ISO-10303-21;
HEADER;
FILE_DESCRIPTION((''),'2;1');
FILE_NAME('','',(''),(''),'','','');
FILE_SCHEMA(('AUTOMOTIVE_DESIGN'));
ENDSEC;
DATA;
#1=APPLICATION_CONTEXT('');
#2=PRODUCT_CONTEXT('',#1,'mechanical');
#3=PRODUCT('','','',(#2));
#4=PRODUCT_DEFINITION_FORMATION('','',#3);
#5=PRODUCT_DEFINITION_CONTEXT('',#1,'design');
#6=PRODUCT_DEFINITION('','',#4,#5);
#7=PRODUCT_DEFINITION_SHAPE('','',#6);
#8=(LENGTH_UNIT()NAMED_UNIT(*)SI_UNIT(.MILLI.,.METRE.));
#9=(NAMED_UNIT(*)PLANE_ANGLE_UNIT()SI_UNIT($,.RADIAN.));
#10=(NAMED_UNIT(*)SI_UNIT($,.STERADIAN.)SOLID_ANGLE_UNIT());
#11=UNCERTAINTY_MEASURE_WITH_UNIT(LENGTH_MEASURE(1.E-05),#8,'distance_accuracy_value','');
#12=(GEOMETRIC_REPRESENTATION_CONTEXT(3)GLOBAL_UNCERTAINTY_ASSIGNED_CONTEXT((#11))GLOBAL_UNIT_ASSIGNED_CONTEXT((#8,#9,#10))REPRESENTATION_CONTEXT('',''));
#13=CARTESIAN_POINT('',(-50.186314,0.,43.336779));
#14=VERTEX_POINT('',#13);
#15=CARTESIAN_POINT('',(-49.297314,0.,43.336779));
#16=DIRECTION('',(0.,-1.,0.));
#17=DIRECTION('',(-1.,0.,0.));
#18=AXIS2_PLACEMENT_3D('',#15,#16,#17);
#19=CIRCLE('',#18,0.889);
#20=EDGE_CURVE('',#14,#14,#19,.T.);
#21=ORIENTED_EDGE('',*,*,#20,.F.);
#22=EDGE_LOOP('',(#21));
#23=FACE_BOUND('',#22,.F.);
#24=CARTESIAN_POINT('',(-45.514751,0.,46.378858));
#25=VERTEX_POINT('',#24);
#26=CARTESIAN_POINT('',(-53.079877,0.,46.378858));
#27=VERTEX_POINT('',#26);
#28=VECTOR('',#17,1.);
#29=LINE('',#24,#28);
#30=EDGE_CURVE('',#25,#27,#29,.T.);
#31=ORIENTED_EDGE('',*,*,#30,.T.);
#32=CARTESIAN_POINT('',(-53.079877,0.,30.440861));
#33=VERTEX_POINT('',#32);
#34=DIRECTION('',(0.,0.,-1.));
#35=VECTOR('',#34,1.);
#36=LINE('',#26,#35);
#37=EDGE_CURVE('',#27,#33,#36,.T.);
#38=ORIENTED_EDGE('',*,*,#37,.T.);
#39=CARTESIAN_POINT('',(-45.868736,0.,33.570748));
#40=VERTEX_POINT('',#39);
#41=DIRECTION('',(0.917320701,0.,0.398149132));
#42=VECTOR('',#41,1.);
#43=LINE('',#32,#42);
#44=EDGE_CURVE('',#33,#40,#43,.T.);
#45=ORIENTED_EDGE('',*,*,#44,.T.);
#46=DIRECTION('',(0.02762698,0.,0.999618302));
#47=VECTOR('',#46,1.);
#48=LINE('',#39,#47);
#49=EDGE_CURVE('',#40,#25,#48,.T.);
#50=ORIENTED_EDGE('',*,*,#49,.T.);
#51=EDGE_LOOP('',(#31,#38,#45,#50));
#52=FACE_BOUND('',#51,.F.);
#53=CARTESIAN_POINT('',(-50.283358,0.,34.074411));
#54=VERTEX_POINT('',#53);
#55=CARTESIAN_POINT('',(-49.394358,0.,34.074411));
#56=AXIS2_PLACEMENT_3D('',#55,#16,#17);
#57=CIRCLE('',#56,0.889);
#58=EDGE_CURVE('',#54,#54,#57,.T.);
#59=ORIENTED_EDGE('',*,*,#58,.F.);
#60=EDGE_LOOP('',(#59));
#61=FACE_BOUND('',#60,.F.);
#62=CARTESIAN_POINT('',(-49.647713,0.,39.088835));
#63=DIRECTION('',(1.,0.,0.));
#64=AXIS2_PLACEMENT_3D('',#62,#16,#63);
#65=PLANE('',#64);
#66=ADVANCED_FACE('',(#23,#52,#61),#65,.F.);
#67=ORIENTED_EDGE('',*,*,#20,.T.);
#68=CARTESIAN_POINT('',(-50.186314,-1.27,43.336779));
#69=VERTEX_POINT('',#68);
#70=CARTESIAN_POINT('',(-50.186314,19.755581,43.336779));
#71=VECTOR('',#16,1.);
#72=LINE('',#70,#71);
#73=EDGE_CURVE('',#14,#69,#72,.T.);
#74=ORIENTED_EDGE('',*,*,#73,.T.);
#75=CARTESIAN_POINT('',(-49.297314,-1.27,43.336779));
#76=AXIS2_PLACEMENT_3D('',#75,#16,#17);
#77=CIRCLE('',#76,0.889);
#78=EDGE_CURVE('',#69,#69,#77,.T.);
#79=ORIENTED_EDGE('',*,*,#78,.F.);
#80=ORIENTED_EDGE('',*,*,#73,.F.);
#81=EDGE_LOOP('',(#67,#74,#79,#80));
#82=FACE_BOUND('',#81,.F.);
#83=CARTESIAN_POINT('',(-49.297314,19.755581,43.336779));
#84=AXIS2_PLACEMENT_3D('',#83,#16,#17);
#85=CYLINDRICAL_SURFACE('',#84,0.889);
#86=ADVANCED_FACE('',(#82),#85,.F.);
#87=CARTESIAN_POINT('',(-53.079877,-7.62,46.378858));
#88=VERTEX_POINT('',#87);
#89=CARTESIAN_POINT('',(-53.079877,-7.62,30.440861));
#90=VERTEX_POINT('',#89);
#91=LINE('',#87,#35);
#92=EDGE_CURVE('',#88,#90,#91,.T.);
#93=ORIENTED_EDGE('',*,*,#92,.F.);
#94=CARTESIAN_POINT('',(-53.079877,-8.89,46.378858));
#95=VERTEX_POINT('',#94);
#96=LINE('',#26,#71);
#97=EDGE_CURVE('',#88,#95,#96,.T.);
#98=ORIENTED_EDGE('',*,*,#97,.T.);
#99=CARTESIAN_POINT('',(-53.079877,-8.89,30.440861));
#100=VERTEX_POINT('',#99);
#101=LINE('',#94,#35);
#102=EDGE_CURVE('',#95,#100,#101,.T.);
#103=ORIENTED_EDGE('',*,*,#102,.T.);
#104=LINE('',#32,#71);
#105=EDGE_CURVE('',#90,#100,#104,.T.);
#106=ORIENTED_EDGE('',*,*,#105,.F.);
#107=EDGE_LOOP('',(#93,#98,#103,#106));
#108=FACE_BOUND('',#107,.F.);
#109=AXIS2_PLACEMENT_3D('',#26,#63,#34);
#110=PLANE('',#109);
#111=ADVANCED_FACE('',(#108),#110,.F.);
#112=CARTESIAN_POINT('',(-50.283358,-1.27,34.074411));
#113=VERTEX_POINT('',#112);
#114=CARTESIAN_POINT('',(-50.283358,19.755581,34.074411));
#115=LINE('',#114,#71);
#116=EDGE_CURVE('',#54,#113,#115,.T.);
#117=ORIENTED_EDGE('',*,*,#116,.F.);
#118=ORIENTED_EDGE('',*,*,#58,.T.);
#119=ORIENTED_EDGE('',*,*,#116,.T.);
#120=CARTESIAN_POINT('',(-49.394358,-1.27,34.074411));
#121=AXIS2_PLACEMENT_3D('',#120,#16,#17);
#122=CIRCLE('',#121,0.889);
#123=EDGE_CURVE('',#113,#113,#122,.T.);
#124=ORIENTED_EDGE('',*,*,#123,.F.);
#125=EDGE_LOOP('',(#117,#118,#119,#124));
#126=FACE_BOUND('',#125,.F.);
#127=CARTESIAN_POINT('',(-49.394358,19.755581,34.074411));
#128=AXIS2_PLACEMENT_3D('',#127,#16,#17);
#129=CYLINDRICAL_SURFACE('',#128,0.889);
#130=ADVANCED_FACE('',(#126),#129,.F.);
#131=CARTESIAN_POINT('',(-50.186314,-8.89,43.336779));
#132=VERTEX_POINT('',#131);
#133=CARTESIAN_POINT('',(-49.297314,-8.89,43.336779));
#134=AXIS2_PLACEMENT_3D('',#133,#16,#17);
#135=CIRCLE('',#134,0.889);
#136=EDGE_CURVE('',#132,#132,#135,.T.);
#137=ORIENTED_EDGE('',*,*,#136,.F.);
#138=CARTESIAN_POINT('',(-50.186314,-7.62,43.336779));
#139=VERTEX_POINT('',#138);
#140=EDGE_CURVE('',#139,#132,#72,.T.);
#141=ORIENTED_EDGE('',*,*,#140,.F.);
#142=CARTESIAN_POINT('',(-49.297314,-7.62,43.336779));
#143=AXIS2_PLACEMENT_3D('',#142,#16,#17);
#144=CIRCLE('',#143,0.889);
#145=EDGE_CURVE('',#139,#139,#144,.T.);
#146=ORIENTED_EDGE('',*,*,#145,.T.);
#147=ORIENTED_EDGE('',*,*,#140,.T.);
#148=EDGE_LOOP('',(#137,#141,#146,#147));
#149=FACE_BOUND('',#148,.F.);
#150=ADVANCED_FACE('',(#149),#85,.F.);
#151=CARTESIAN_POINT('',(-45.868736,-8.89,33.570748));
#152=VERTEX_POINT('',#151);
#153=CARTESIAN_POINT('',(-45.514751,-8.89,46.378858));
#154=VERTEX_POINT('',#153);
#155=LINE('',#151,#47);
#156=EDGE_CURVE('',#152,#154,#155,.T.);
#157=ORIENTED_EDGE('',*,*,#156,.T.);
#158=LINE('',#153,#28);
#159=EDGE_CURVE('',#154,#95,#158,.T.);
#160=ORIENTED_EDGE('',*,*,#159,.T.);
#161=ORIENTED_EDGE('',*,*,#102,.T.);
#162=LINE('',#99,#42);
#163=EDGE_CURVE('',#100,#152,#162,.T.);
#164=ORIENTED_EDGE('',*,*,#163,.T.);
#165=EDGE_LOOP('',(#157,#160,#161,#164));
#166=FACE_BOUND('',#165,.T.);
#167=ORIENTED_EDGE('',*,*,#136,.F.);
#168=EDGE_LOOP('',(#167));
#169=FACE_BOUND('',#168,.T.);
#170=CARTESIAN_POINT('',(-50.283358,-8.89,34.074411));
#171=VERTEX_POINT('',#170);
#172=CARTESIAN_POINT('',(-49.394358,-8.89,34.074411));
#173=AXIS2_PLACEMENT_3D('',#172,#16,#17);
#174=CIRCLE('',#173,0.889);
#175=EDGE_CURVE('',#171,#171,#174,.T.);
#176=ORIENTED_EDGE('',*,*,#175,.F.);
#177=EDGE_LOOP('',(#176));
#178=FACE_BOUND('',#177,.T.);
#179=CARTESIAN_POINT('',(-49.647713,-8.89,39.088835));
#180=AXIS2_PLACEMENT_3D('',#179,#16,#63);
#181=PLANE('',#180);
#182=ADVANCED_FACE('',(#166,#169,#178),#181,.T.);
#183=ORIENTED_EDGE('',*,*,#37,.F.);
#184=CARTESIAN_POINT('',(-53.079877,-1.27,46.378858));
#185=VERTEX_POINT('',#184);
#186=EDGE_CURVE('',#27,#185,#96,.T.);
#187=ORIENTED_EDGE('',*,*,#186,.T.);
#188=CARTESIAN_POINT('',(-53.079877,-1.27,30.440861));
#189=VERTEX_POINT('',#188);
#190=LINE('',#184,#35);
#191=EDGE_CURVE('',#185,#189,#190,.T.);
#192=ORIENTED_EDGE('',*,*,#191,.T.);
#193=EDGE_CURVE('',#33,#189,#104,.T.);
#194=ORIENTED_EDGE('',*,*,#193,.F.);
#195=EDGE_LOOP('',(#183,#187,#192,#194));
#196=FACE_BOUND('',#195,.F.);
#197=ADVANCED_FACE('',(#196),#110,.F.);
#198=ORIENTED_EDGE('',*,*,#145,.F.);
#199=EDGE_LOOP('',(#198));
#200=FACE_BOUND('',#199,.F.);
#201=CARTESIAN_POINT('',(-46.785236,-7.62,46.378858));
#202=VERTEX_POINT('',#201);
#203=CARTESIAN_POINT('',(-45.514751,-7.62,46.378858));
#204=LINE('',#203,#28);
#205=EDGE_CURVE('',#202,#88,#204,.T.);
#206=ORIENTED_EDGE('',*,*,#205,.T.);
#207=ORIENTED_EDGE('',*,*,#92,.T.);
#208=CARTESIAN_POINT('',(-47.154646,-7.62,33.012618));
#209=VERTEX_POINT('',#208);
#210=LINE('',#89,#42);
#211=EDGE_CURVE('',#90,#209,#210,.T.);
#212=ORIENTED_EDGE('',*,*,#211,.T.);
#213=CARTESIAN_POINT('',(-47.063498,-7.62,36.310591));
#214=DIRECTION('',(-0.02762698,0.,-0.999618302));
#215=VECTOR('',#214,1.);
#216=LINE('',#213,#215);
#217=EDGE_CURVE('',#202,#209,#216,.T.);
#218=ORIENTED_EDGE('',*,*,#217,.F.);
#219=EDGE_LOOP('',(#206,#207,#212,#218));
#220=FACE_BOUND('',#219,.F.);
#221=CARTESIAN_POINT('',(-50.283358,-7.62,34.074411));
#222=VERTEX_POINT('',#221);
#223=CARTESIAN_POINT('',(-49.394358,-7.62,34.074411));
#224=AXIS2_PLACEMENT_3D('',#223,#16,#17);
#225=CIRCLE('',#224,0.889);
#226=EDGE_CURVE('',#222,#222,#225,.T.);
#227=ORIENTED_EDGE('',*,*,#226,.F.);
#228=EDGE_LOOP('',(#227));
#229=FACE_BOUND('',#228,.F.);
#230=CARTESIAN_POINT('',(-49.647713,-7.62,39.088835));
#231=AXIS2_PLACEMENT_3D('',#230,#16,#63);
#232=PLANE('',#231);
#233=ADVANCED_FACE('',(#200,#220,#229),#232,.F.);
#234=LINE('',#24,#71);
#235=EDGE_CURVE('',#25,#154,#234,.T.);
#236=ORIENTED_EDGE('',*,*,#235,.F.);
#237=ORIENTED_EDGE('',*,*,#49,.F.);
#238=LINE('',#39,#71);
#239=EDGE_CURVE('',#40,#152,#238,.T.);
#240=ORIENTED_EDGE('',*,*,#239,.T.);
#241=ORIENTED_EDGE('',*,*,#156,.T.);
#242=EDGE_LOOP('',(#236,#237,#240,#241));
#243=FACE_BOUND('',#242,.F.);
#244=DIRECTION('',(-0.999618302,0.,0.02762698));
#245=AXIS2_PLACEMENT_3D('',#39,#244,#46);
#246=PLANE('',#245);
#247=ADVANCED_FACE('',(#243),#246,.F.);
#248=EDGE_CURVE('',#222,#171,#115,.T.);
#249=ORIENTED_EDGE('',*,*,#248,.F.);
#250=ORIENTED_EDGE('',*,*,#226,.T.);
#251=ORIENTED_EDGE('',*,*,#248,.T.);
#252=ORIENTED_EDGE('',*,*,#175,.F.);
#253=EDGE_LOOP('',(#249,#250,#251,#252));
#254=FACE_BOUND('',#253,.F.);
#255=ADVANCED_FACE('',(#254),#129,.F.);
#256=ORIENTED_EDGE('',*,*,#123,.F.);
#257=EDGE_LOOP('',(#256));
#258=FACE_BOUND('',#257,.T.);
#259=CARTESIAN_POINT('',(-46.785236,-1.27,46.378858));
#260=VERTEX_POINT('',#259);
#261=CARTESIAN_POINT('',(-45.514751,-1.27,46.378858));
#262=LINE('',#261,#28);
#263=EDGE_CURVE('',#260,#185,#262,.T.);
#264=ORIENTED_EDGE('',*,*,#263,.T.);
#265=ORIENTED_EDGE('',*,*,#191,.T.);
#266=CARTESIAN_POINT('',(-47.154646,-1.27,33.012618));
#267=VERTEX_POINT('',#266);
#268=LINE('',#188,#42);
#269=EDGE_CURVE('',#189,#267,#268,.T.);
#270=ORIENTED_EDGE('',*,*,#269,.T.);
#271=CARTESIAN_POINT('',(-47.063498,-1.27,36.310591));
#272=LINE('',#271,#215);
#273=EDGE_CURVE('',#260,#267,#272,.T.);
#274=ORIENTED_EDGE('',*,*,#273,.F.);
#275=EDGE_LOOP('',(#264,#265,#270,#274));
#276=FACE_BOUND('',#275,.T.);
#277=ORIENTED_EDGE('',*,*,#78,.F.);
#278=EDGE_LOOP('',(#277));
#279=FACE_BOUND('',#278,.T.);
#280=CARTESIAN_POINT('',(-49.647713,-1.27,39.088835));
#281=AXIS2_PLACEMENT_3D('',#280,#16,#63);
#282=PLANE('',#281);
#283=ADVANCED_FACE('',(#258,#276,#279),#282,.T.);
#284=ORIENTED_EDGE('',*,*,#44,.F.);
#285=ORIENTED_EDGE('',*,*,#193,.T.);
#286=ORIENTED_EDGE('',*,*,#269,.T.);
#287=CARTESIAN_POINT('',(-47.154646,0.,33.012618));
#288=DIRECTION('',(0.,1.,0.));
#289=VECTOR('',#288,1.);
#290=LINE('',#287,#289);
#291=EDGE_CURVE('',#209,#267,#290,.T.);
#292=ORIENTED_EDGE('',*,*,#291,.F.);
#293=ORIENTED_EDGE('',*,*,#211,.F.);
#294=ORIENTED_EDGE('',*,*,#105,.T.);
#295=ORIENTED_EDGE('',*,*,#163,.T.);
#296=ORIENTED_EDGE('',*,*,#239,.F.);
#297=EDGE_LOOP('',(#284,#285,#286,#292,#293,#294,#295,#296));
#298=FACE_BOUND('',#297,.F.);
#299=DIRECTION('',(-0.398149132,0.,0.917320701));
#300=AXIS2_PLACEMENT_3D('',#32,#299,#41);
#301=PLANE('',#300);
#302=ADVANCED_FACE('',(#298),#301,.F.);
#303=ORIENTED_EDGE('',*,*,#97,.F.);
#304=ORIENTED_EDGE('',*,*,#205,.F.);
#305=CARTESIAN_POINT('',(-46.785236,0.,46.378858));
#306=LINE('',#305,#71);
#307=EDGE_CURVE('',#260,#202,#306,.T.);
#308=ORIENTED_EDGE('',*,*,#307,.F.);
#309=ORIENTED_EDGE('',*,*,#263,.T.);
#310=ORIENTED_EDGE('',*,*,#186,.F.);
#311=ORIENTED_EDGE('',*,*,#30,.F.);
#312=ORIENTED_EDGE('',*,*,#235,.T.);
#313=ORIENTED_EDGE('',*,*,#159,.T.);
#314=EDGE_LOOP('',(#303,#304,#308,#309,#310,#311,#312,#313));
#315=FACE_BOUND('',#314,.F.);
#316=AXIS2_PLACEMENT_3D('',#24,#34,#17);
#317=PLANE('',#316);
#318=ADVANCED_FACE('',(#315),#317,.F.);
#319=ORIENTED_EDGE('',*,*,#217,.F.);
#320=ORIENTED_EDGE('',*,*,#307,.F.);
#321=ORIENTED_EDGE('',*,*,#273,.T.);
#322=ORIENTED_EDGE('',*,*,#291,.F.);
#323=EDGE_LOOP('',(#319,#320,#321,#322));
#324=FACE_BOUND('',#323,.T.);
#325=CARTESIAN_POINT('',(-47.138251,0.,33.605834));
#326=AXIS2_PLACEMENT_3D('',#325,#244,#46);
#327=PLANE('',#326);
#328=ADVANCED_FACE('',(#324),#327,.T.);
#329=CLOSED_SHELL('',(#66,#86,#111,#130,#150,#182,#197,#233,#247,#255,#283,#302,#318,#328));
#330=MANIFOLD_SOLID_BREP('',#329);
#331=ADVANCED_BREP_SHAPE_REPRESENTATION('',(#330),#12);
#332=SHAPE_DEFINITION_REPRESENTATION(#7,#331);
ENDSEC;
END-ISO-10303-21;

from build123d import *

# Parameters (mm, degrees)
F1_DEPTH = 8.89
F2_T     = -1.27
F3_D     = 1.778


# Not quite as in the source:
# - a feature names something its author has since deleted; it is built from what else it names


with BuildPart() as f1:
    # F0 (on Front) → F1 (new body)
    with BuildSketch(Plane.XZ):
        Polygon((-45.8687357605, 33.5707478225), (-45.5147512257, 46.3788583875), (-53.0798770487, 46.3788583875), (-53.0798770487, 30.4408613592), align=None)
    extrude(amount=F1_DEPTH)

    # F2
    f2_openings = [f1.faces().sort_by_distance(p)[0] for p in [
        (-49.297314, -4.445, 46.378858),
        (-53.079877, -4.445, 38.40986),
        (-49.474306, -4.445, 32.005805),
    ]]
    offset(amount=F2_T, openings=f2_openings)

    # F3 (through all)
    with Locations(Plane(origin=(0, 0, 0), x_dir=(1, 0, 0), z_dir=(0, 1, 0))):
        with Locations((-49.2973141372, -43.3367788792), (-49.3943579495, -34.0744107962)):
            Hole(F3_D / 2)


solid = f1.part
